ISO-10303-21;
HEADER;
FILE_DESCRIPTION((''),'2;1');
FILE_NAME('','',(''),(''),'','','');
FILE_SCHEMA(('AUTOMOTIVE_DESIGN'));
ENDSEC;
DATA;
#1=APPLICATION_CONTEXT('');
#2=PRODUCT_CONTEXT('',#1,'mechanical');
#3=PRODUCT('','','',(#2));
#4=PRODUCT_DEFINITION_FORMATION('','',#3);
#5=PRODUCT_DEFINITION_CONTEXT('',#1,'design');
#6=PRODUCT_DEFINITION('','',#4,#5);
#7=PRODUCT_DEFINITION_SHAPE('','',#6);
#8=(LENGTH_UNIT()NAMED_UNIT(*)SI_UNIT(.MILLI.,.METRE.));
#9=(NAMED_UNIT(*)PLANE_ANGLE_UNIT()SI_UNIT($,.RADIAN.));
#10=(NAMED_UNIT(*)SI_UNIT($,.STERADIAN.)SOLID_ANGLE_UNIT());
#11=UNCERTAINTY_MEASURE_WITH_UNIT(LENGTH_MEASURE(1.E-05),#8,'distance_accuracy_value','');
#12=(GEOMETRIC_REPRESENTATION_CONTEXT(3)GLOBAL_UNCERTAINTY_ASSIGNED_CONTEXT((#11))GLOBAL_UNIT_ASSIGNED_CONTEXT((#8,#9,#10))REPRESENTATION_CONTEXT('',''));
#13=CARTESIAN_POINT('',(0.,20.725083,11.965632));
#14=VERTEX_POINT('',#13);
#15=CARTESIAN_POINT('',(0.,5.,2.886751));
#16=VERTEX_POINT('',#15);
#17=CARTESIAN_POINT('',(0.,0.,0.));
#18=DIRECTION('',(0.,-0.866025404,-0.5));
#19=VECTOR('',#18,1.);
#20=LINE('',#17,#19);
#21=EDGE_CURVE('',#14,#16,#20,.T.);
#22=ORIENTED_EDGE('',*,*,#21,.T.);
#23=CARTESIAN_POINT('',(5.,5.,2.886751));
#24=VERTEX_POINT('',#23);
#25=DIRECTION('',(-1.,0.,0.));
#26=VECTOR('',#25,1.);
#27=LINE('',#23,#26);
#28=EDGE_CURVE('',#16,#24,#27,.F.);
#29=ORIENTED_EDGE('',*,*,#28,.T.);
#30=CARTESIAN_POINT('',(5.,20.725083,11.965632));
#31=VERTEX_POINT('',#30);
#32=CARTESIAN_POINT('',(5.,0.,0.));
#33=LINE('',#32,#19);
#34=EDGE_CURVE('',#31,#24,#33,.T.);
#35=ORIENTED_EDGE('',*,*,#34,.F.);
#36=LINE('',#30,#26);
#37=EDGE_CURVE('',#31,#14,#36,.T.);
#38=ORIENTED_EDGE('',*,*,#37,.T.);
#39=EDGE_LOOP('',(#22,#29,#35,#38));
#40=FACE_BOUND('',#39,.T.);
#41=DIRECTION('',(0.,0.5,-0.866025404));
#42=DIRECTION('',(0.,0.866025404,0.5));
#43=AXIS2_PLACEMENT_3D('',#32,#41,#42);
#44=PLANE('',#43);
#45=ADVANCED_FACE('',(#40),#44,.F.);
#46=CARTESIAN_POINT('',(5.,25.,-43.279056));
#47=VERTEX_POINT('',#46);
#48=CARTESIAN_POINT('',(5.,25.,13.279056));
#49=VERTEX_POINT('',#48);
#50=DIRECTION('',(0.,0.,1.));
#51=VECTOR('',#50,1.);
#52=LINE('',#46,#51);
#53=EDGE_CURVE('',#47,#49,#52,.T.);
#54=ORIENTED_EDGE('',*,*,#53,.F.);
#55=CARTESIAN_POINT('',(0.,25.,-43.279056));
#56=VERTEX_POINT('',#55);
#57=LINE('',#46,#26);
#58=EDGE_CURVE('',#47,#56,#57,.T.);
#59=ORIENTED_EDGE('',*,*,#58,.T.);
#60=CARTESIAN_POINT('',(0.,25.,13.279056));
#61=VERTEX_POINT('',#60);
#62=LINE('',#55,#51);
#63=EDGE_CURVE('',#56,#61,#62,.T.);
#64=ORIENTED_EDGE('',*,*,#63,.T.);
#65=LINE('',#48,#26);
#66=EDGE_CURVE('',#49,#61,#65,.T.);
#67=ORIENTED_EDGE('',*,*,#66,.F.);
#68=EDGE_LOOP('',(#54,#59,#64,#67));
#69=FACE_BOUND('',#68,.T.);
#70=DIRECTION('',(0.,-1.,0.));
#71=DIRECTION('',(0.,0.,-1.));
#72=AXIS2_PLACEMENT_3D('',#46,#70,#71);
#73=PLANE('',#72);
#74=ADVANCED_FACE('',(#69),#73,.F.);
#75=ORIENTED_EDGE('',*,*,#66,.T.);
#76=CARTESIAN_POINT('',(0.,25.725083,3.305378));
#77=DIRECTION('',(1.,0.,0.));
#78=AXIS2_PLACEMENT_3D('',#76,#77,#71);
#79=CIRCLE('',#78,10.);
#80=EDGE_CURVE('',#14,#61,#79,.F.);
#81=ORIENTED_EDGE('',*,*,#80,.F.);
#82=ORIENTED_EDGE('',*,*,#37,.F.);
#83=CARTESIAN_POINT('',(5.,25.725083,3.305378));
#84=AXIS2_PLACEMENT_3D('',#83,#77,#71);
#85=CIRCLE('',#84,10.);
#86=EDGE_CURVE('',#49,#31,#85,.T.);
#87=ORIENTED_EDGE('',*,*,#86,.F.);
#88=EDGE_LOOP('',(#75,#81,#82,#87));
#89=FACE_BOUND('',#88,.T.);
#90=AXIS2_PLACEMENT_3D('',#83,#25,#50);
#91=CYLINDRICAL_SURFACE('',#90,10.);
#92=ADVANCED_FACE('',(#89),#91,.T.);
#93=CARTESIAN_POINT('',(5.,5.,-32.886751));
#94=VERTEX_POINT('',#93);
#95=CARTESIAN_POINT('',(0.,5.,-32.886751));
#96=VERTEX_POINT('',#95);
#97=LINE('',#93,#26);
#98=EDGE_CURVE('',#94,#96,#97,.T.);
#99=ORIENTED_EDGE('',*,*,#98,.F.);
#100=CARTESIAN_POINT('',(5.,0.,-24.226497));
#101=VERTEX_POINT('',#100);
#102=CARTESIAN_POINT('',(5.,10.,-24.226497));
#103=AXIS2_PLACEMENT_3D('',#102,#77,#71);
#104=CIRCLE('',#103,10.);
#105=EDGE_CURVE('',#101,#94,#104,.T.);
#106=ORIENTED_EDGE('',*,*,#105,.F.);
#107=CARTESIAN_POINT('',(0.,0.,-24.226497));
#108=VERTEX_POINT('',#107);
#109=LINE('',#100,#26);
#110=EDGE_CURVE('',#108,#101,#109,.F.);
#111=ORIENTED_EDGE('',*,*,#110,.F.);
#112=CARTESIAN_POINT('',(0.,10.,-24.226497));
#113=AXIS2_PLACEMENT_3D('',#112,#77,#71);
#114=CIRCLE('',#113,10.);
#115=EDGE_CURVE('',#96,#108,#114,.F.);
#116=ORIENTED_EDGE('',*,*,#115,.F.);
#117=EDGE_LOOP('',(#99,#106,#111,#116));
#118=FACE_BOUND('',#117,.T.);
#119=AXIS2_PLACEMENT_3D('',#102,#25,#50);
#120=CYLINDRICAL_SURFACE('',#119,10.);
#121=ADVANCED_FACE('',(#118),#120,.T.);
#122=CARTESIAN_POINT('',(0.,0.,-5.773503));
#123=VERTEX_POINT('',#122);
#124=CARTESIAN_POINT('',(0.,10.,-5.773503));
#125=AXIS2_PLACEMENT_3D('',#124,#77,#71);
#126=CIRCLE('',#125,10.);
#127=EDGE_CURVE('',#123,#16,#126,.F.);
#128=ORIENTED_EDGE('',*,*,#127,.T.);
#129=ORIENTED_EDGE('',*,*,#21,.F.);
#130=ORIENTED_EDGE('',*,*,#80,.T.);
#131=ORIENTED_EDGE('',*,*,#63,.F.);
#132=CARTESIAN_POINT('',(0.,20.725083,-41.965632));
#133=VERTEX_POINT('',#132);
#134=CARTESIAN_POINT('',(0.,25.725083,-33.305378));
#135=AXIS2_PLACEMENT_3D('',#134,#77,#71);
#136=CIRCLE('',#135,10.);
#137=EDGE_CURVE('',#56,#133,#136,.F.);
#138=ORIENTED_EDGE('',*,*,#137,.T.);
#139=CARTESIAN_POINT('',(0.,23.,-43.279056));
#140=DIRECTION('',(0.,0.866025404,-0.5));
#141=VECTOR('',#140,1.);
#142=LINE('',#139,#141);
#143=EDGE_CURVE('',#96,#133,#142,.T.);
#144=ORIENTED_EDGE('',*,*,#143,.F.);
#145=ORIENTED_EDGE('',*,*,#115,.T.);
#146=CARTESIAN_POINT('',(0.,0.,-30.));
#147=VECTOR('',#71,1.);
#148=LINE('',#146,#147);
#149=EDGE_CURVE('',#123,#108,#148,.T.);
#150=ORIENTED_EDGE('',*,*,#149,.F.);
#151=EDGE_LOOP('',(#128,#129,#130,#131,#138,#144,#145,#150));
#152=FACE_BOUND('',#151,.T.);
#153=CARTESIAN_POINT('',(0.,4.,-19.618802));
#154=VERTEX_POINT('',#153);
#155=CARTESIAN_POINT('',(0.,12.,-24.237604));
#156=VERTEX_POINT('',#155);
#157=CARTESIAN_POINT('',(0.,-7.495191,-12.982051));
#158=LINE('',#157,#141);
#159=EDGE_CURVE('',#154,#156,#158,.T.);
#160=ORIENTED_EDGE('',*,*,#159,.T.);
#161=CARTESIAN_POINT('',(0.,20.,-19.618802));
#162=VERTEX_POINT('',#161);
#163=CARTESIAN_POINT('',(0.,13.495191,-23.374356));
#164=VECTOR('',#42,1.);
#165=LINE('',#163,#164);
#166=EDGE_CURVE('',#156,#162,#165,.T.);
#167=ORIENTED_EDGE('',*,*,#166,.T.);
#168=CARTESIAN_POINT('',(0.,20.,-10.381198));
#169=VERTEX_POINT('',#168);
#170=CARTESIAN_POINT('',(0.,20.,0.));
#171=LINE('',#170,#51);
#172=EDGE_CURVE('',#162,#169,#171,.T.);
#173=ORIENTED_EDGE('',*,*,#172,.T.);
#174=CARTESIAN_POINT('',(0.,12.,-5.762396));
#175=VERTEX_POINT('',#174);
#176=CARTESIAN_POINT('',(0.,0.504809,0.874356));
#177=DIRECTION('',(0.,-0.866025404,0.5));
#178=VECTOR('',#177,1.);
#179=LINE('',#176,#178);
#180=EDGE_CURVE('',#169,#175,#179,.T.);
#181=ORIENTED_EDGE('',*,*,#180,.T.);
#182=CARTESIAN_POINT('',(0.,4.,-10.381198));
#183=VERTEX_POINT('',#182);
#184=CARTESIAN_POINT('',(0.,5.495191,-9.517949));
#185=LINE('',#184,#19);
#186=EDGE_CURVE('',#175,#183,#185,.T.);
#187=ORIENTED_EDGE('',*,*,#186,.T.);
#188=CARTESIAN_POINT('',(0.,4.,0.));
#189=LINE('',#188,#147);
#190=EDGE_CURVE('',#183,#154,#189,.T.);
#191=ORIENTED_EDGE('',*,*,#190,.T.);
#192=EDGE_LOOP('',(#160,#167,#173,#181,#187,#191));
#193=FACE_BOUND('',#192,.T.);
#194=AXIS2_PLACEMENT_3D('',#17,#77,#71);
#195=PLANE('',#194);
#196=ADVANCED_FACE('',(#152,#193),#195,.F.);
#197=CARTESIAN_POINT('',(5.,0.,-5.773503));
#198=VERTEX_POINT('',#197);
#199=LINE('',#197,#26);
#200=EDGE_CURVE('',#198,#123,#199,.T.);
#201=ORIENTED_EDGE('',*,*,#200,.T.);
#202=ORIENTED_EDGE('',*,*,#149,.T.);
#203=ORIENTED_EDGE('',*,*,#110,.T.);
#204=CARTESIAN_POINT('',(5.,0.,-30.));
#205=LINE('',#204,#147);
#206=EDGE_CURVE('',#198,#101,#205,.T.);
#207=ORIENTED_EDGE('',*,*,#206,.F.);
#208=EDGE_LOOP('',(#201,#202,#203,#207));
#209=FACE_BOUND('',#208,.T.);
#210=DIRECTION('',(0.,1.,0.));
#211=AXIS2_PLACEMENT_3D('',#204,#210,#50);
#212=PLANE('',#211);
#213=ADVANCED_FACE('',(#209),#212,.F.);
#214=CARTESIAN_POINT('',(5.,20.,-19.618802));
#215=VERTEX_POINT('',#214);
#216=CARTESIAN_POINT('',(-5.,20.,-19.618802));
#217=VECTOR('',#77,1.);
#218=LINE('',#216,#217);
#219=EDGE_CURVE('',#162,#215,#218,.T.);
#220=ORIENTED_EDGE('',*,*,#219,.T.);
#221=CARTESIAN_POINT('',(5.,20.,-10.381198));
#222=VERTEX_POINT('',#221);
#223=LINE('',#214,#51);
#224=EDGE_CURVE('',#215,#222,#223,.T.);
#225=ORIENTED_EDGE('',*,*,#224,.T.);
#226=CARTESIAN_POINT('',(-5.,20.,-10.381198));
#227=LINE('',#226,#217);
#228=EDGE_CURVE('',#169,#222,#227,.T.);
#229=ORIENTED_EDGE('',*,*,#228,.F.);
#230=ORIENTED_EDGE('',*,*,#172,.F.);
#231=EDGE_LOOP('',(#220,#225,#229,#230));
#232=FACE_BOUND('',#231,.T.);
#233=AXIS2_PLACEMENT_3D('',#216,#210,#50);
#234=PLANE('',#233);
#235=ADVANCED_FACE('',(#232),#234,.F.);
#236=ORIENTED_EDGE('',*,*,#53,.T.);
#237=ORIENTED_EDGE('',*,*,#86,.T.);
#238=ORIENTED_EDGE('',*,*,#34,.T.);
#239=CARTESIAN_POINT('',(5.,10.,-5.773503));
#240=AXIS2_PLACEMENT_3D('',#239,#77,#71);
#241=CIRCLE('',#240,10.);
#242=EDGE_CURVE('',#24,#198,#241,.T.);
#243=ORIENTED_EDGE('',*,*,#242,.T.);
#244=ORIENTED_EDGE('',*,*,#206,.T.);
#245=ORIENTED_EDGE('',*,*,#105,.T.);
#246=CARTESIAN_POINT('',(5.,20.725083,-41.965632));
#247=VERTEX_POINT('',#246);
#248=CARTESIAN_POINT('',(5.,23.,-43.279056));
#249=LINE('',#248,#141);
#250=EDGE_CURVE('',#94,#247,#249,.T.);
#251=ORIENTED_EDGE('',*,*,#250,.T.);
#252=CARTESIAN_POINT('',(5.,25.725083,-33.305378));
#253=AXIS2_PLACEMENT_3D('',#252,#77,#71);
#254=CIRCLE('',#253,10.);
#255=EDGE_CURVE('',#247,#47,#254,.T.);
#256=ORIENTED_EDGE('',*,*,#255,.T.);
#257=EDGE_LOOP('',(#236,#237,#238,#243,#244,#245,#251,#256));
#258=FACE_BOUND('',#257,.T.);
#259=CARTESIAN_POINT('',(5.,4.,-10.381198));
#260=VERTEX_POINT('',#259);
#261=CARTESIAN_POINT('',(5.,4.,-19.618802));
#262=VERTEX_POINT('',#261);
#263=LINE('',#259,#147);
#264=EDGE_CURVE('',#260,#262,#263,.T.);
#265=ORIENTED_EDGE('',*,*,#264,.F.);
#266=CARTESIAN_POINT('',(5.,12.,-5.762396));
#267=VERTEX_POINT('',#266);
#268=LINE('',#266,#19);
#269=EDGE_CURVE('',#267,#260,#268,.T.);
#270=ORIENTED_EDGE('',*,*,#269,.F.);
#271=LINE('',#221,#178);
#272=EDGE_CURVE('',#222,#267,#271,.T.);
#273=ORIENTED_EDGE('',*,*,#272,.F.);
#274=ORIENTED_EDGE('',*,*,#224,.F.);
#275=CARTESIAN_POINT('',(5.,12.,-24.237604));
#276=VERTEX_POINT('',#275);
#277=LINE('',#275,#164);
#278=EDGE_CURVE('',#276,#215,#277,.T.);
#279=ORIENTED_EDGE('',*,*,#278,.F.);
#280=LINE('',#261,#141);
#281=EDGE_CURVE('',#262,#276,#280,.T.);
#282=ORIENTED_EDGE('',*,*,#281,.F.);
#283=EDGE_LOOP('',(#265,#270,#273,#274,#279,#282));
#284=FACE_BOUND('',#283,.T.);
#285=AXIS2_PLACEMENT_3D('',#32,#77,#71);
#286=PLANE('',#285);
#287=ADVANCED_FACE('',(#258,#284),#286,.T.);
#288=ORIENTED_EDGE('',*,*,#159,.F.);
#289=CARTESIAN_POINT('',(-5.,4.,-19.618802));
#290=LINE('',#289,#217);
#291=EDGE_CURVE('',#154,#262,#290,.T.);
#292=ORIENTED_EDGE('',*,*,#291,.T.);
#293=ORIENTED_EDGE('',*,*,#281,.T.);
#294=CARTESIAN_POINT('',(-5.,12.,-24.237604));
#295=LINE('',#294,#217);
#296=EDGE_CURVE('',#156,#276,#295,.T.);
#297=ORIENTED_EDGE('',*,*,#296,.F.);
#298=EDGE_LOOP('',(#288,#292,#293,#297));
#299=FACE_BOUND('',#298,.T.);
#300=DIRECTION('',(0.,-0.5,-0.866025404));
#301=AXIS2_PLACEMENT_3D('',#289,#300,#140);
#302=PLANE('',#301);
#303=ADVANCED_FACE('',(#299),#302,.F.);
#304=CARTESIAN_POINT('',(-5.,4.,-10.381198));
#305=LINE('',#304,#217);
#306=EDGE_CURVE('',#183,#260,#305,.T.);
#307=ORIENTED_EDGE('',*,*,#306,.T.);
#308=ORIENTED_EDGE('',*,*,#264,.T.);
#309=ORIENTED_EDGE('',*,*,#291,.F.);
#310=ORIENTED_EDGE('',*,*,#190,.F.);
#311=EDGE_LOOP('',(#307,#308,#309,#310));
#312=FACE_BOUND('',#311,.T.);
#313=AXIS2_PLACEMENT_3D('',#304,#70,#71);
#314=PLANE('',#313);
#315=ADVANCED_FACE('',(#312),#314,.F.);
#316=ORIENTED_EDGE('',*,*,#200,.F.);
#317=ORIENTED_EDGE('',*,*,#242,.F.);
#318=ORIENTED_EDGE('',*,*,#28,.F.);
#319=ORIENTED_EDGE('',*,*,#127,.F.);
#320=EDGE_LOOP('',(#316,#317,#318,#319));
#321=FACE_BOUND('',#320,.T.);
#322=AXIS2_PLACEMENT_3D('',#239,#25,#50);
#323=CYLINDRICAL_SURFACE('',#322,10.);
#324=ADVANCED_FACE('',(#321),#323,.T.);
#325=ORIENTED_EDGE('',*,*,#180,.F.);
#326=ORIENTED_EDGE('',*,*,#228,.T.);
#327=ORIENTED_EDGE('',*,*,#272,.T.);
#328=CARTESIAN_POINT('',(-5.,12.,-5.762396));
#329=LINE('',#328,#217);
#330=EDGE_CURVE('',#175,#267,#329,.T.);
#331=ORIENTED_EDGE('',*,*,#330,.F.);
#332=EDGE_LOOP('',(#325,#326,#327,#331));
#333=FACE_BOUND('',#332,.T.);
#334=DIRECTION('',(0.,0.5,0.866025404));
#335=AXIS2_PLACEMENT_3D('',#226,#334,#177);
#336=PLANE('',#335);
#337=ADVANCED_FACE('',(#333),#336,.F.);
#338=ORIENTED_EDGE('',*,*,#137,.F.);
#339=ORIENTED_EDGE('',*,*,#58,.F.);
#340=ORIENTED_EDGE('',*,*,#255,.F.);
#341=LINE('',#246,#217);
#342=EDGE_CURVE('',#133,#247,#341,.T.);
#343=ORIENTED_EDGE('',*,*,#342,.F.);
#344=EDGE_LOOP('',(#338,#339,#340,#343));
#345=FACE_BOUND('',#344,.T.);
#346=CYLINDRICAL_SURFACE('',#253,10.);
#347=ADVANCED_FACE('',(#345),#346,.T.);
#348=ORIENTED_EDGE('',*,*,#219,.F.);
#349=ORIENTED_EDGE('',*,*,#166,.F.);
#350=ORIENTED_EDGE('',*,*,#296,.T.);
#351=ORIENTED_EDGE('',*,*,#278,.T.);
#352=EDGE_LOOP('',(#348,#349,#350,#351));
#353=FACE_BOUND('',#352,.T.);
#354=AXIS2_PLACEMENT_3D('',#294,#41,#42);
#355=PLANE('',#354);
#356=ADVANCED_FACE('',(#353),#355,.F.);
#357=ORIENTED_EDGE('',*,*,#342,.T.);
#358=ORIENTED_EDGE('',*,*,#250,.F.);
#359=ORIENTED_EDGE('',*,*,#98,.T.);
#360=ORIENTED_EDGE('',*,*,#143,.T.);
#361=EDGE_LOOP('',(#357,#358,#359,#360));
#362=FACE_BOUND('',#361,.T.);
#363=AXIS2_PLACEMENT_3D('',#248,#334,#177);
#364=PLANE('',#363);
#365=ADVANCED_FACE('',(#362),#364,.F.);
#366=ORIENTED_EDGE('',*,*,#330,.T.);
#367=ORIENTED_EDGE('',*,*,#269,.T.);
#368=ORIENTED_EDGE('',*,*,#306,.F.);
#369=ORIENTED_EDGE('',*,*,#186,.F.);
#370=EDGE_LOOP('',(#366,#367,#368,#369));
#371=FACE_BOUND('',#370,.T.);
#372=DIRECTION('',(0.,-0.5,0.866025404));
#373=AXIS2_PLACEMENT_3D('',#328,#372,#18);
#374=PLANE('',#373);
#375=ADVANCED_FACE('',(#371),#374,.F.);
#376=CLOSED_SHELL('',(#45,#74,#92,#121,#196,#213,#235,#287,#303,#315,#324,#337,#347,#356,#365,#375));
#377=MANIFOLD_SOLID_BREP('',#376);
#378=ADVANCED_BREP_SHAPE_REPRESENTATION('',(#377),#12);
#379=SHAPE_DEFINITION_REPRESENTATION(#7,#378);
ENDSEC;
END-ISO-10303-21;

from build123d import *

# Parameters (mm, degrees)
EXTRUDE_1_DEPTH     = 5
FILLET_1_R          = 10
CUT_EXTRUDE_1_DEPTH = 10


with BuildPart() as part:
    # 스케치1 → 보스-돌출1 (new body)
    with BuildSketch(Plane(origin=(0, 0, 0), x_dir=(0, 0, -1), z_dir=(1, 0, 0))):
        Polygon((0, 0), (-13.279056191, 23), (-13.279056191, 25), (43.279056191, 25), (43.279056191, 23), (30, 0), align=None)
    extrude(amount=EXTRUDE_1_DEPTH)

    # 필렛1
    # the kernel refuses this fillet: 10 mm, written as the material it takes off along each edge
    with BuildSketch(Plane(origin=(-6.56712034, 23, -43.279056191), x_dir=(0, 1, 0), z_dir=(1, 0, 0))) as fillet_1_piece_1:
        with BuildLine():
            CenterArc((2.725082782, 9.973678106), FILLET_1_R, 240, 25.841932763)
            Line((-2.274917218, 1.313424068), (-2.374917218, 1.140218987))
            Line((-2.374917218, 1.140218987), (-0.1, -0.173205081))
            Line((-0.1, -0.173205081), (0, -0.2))
            ThreePointArc((0, -0.2), (1, -0.2), (1.985498344, -0.199473562))
            Line((1.985498344, -0.199473562), (2, 0))
        make_face()
    extrude(amount=18.13424068, mode=Mode.SUBTRACT)
    with BuildSketch(Plane(origin=(-14.43375673, 0, -30), x_dir=(0, 0.8660254037844399, -0.499999999999998), z_dir=(1, 0, 0))) as fillet_1_piece_2:
        with BuildLine():
            CenterArc((FILLET_1_R * 0.57735026919, FILLET_1_R), FILLET_1_R, 210, 60)
            Line((-FILLET_1_R * 0.288675134595, FILLET_1_R * 0.5), (-FILLET_1_R * 0.305995642671, FILLET_1_R * 0.49))
            Line((-FILLET_1_R * 0.305995642671, FILLET_1_R * 0.49), (-FILLET_1_R * 0.0115470053838, -FILLET_1_R * 0.02))
            Line((-FILLET_1_R * 0.0115470053838, -FILLET_1_R * 0.02), (FILLET_1_R * 0.57735026919, -FILLET_1_R * 0.02))
            Line((FILLET_1_R * 0.57735026919, -FILLET_1_R * 0.02), (FILLET_1_R * 0.57735026919, 0))
        make_face()
    extrude(amount=33.867513459, mode=Mode.SUBTRACT)
    with BuildSketch(Plane(origin=(-14.43375673, 0, 0), x_dir=(0, 0.8660254037844397, 0.49999999999999833), z_dir=(1, 0, 0))) as fillet_1_piece_3:
        with BuildLine():
            CenterArc((FILLET_1_R * 0.57735026919, -FILLET_1_R), FILLET_1_R, 90, 60)
            Line((-FILLET_1_R * 0.288675134595, -FILLET_1_R * 0.5), (-FILLET_1_R * 0.305995642671, -FILLET_1_R * 0.49))
            Line((-FILLET_1_R * 0.305995642671, -FILLET_1_R * 0.49), (-FILLET_1_R * 0.0115470053838, FILLET_1_R * 0.02))
            Line((-FILLET_1_R * 0.0115470053838, FILLET_1_R * 0.02), (FILLET_1_R * 0.57735026919, FILLET_1_R * 0.02))
            Line((FILLET_1_R * 0.57735026919, FILLET_1_R * 0.02), (FILLET_1_R * 0.57735026919, 0))
        make_face()
    extrude(amount=33.867513459, mode=Mode.SUBTRACT)
    with BuildSketch(Plane(origin=(-6.56712034, 23, 13.279056191), x_dir=(0, -0.8660254037844397, -0.4999999999999979), z_dir=(1, 0, 0))) as fillet_1_piece_4:
        with BuildLine():
            CenterArc((2.626848136, 10), FILLET_1_R, 244.158067237, 25.841932763)
            Line((-1.732050808, 1), (-1.819228786, 0.82))
            ThreePointArc((-1.819228786, 0.82), (-0.966025404, 0.326794919), (-0.1, -0.173205081))
            Line((-0.1, -0.173205081), (0, -0.2))
            Line((0, -0.2), (2.626848136, -0.2))
            Line((2.626848136, -0.2), (2.626848136, 0))
        make_face()
    extrude(amount=18.13424068, mode=Mode.SUBTRACT)

    # 스케치2 → 컷-돌출1 (cut)
    with BuildSketch(Plane(origin=(5, 0, 0), x_dir=(0, 0, -1), z_dir=(1, 0, 0))):
        Polygon((19.618802154, 20), (10.381197846, 20), (5.762395693, 12), (10.381197846, 4), (19.618802154, 4), (24.237604307, 12), align=None)
    extrude(amount=-CUT_EXTRUDE_1_DEPTH, mode=Mode.SUBTRACT)


solid = part.part
